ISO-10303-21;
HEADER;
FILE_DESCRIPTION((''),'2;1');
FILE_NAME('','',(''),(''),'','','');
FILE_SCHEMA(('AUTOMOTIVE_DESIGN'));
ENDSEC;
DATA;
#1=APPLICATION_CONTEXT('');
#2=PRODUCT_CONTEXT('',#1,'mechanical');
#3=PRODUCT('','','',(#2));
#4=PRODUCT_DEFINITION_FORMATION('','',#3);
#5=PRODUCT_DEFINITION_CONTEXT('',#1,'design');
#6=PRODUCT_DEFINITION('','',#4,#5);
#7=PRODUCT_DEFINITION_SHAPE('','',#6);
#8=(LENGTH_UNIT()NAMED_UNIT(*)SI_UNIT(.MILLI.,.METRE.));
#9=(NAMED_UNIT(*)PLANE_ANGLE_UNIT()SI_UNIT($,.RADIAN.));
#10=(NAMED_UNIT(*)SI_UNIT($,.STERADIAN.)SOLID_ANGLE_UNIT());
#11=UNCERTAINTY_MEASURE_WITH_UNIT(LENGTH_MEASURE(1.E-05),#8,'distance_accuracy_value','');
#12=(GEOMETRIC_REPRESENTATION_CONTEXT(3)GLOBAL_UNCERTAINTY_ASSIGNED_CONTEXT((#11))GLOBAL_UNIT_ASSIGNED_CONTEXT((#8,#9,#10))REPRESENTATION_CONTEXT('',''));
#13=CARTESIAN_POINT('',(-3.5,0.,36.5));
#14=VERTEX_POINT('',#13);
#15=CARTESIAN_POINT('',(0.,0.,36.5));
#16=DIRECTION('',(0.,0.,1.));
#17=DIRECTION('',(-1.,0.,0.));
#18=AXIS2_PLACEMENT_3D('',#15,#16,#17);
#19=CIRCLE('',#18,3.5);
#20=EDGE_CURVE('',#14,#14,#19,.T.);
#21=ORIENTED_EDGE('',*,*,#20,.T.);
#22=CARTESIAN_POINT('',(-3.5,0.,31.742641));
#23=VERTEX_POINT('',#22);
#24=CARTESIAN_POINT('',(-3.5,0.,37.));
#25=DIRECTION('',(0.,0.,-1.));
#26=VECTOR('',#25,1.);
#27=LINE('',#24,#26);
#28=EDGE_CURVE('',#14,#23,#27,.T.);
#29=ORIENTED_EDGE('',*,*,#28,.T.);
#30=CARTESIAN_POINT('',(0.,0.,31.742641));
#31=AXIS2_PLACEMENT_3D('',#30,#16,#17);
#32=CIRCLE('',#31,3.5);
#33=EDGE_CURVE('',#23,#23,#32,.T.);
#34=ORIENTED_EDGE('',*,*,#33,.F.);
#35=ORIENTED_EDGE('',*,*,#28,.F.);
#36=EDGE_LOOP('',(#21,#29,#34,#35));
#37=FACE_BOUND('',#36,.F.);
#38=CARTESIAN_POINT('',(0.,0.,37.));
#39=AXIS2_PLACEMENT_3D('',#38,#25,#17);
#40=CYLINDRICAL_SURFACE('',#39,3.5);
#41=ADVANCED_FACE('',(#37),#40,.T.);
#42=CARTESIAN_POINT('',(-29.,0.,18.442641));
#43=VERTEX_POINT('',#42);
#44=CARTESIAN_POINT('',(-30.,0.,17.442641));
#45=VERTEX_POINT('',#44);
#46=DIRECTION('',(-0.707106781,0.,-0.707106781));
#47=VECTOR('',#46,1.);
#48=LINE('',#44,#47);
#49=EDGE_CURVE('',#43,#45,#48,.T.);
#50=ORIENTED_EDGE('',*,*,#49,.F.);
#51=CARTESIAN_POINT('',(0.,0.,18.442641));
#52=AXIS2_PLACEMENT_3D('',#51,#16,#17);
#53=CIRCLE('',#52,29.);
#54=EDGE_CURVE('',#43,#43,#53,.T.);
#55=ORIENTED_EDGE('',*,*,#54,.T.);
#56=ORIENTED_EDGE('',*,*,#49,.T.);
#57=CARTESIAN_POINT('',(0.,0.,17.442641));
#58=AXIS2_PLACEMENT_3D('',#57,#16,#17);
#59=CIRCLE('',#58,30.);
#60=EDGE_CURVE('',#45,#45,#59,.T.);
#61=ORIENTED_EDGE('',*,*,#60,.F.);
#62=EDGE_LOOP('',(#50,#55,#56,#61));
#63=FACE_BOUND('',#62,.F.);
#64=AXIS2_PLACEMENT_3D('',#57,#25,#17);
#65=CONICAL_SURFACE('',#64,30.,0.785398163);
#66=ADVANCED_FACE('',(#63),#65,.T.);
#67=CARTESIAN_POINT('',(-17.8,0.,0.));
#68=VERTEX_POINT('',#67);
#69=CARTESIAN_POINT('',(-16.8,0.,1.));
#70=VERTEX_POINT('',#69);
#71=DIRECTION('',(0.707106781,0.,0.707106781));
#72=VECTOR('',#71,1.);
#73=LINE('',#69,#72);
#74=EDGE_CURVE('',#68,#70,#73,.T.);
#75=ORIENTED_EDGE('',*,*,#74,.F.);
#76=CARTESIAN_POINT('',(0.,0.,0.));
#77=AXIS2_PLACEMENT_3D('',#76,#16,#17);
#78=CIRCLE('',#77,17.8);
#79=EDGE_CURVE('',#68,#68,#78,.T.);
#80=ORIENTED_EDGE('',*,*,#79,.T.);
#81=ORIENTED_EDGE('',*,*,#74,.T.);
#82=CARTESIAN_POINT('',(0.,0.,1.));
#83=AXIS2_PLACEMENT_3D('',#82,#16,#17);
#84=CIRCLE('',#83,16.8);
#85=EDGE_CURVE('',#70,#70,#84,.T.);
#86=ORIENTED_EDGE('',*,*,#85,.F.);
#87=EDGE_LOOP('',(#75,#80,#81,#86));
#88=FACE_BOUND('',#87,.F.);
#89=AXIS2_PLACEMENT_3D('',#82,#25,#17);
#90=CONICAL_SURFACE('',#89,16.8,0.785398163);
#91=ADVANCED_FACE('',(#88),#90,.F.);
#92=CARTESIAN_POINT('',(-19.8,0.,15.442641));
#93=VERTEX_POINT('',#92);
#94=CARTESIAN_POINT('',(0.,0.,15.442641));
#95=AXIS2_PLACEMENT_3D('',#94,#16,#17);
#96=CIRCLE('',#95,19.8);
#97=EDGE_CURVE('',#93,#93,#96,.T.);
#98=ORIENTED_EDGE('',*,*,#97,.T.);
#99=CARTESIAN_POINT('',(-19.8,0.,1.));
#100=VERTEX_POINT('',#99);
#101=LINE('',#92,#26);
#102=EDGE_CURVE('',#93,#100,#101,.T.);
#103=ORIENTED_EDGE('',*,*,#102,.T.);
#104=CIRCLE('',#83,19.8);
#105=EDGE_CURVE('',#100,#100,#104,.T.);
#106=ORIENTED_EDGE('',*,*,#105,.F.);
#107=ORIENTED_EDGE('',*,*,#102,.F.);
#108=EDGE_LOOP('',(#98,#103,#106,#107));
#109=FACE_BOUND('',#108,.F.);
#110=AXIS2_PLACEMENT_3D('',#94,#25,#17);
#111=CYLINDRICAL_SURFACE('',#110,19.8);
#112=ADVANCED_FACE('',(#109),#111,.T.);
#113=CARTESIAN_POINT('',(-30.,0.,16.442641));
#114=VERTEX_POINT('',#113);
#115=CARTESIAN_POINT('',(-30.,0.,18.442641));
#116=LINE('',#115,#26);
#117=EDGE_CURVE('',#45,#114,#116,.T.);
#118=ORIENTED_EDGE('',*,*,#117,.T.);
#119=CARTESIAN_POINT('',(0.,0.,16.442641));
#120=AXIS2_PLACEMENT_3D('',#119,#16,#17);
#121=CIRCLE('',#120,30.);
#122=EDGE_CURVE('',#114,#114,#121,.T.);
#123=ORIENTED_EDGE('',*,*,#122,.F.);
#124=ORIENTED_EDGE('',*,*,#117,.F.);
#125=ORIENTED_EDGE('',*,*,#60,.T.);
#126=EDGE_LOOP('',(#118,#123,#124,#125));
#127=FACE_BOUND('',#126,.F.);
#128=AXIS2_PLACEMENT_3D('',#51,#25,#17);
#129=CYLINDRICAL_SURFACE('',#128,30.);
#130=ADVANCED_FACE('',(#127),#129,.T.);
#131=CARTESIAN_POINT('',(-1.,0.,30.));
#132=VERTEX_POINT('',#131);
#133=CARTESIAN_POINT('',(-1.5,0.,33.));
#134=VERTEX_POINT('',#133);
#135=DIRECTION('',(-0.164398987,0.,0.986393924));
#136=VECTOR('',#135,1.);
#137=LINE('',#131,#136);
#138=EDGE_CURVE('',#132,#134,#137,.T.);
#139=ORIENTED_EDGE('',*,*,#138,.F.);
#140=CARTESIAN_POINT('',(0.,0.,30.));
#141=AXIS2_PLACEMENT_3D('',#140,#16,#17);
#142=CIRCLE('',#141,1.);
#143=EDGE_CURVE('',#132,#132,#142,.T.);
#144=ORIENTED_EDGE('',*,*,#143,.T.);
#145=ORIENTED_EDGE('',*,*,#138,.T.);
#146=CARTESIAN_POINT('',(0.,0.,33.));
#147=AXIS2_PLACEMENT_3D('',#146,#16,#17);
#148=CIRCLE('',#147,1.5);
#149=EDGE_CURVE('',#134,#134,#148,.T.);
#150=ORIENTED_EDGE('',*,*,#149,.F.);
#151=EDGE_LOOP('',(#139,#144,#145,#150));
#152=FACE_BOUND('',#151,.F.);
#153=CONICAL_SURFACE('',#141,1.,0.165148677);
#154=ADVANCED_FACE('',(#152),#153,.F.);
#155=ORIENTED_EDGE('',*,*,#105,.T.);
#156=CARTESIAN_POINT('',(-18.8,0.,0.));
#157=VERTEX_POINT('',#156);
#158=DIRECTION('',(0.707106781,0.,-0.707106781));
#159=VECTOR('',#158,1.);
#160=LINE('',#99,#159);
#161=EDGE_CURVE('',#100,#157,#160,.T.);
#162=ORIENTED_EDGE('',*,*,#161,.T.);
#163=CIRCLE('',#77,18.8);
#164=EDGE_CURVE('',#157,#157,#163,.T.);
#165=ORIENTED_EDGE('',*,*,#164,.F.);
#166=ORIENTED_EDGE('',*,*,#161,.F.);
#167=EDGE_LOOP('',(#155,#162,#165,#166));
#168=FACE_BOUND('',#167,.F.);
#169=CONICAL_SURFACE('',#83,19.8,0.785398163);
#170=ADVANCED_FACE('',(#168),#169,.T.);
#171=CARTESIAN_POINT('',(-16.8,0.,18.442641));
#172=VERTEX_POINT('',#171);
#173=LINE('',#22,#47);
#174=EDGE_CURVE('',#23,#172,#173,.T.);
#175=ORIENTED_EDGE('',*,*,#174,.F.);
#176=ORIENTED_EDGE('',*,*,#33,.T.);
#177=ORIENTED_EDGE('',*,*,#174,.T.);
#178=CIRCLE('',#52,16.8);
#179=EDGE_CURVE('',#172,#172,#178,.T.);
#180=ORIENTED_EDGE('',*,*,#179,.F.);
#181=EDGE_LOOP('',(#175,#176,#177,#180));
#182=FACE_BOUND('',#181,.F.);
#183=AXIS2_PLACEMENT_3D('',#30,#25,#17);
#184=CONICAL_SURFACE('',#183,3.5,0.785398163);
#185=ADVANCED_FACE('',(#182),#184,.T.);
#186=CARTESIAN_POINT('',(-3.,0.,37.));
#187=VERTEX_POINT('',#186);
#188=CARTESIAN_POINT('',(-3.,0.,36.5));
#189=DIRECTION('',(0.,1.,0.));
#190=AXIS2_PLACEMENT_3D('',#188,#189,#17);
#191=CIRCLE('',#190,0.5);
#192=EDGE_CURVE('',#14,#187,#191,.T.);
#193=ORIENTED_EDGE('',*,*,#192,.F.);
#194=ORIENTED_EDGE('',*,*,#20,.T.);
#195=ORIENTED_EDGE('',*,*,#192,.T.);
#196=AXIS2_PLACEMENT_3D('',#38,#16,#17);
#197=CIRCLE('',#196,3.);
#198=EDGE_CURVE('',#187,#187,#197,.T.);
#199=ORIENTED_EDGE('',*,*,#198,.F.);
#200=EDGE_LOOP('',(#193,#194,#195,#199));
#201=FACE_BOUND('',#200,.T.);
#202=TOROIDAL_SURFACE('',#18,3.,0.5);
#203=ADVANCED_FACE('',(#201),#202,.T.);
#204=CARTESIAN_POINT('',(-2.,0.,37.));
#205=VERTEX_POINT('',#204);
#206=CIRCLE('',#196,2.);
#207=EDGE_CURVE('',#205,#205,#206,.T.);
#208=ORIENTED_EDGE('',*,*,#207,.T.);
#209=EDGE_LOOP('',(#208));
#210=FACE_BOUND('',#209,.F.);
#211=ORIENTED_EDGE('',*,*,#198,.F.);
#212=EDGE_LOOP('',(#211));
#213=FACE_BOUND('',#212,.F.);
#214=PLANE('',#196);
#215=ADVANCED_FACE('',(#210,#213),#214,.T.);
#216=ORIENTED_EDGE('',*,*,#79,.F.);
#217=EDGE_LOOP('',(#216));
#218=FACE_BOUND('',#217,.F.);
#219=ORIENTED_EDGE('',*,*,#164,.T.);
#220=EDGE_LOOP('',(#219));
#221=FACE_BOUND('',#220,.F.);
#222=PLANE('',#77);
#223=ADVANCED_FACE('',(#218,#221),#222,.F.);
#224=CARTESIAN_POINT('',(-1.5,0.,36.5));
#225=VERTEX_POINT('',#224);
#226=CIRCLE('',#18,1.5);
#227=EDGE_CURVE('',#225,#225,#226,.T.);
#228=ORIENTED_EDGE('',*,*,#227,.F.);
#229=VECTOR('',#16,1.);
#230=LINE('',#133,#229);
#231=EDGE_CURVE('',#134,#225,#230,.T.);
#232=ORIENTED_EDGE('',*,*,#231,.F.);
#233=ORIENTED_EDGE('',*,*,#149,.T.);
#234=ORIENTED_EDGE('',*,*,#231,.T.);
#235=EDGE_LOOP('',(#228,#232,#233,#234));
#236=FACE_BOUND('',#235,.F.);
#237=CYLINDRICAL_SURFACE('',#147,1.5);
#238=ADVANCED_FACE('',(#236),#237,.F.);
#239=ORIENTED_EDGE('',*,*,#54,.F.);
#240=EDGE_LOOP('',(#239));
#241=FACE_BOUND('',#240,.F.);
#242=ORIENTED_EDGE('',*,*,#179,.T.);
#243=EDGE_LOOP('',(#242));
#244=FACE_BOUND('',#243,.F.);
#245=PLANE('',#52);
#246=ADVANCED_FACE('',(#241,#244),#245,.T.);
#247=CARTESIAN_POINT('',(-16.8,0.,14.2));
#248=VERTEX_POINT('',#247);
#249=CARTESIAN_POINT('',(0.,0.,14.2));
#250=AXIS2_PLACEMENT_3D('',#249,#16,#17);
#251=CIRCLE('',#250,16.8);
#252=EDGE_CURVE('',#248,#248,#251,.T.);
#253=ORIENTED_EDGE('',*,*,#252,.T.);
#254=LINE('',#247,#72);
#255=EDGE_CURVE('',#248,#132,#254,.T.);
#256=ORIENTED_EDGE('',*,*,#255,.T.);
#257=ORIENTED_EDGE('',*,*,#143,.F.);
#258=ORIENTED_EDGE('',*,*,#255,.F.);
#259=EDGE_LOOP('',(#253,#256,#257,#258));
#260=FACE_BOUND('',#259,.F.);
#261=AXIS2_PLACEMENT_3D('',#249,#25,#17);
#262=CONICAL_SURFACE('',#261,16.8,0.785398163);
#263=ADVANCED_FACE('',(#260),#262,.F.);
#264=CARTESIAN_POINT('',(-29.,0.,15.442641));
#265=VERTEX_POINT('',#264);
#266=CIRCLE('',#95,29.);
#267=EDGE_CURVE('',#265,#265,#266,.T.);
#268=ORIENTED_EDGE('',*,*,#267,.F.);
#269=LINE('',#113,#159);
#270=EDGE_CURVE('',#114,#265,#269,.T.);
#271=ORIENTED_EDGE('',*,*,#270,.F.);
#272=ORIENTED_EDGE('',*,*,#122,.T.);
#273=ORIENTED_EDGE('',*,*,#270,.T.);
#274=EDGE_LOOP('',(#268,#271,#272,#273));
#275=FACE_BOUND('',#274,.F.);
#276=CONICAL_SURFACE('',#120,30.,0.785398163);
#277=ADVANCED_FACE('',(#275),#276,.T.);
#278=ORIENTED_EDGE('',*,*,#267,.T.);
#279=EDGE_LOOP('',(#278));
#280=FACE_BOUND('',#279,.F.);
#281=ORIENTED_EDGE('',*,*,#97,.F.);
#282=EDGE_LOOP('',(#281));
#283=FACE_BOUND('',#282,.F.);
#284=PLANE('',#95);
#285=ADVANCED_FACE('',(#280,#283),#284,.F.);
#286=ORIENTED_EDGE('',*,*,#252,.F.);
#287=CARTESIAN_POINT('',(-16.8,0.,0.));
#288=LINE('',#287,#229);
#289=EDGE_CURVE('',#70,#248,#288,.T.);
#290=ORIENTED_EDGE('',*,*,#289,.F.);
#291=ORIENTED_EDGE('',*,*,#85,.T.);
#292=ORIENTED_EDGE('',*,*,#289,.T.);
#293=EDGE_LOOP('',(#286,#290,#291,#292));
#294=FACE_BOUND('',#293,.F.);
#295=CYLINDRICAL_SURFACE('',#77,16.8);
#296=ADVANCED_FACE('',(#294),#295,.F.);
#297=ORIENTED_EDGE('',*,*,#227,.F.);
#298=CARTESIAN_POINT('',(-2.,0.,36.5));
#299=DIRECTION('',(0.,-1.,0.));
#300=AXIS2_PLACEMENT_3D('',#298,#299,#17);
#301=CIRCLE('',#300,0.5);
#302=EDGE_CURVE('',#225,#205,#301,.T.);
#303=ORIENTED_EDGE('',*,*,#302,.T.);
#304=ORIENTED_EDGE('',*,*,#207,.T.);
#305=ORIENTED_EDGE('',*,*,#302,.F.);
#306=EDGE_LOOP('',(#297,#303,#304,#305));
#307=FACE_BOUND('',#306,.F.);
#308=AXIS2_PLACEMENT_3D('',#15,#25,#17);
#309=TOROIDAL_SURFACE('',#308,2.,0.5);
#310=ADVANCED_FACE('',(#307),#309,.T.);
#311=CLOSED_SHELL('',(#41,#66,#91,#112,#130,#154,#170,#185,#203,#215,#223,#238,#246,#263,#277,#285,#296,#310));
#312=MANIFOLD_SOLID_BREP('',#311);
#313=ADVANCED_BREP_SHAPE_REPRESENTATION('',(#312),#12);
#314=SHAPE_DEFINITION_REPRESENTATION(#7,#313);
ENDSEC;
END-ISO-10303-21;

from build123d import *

# Parameters (mm, degrees)
F2_SIZE = 1
F3_R    = 0.5


# Not quite as in the source:
# - a feature names something its author has since deleted; it is built from what else it names


with BuildPart() as f1:
    # F0 (on Front) → F1 (revolve)
    with BuildSketch(Plane.XZ):
        Polygon((-19.8, 15.4426406871), (-19.8, 0), (-16.8, 0), (-16.8, 14.2), (-1, 30), (-1.5, 33), (-1.5, 37), (-3.5, 37), (-3.5, 31.7426406871), (-16.8, 18.4426406871), (-30, 18.4426406871), (-30, 15.4426406871), align=None)
    revolve(axis=Axis((0, 0, 35), (0, 0, 1)))

    # F2
    f2_edges = [f1.edges().sort_by_distance(p)[0] for p in [
        (30, 0, 18.442641),
        (30, 0, 15.442641),
        (19.8, 0, 0),
        (16.8, 0, 0),
    ]]
    chamfer(f2_edges, length=F2_SIZE)

    # F3
    f3_edges = [f1.edges().sort_by_distance(p)[0] for p in [
        (1.5, 0, 37),
        (3.5, 0, 37),
    ]]
    fillet(f3_edges, radius=F3_R)


solid = f1.part
